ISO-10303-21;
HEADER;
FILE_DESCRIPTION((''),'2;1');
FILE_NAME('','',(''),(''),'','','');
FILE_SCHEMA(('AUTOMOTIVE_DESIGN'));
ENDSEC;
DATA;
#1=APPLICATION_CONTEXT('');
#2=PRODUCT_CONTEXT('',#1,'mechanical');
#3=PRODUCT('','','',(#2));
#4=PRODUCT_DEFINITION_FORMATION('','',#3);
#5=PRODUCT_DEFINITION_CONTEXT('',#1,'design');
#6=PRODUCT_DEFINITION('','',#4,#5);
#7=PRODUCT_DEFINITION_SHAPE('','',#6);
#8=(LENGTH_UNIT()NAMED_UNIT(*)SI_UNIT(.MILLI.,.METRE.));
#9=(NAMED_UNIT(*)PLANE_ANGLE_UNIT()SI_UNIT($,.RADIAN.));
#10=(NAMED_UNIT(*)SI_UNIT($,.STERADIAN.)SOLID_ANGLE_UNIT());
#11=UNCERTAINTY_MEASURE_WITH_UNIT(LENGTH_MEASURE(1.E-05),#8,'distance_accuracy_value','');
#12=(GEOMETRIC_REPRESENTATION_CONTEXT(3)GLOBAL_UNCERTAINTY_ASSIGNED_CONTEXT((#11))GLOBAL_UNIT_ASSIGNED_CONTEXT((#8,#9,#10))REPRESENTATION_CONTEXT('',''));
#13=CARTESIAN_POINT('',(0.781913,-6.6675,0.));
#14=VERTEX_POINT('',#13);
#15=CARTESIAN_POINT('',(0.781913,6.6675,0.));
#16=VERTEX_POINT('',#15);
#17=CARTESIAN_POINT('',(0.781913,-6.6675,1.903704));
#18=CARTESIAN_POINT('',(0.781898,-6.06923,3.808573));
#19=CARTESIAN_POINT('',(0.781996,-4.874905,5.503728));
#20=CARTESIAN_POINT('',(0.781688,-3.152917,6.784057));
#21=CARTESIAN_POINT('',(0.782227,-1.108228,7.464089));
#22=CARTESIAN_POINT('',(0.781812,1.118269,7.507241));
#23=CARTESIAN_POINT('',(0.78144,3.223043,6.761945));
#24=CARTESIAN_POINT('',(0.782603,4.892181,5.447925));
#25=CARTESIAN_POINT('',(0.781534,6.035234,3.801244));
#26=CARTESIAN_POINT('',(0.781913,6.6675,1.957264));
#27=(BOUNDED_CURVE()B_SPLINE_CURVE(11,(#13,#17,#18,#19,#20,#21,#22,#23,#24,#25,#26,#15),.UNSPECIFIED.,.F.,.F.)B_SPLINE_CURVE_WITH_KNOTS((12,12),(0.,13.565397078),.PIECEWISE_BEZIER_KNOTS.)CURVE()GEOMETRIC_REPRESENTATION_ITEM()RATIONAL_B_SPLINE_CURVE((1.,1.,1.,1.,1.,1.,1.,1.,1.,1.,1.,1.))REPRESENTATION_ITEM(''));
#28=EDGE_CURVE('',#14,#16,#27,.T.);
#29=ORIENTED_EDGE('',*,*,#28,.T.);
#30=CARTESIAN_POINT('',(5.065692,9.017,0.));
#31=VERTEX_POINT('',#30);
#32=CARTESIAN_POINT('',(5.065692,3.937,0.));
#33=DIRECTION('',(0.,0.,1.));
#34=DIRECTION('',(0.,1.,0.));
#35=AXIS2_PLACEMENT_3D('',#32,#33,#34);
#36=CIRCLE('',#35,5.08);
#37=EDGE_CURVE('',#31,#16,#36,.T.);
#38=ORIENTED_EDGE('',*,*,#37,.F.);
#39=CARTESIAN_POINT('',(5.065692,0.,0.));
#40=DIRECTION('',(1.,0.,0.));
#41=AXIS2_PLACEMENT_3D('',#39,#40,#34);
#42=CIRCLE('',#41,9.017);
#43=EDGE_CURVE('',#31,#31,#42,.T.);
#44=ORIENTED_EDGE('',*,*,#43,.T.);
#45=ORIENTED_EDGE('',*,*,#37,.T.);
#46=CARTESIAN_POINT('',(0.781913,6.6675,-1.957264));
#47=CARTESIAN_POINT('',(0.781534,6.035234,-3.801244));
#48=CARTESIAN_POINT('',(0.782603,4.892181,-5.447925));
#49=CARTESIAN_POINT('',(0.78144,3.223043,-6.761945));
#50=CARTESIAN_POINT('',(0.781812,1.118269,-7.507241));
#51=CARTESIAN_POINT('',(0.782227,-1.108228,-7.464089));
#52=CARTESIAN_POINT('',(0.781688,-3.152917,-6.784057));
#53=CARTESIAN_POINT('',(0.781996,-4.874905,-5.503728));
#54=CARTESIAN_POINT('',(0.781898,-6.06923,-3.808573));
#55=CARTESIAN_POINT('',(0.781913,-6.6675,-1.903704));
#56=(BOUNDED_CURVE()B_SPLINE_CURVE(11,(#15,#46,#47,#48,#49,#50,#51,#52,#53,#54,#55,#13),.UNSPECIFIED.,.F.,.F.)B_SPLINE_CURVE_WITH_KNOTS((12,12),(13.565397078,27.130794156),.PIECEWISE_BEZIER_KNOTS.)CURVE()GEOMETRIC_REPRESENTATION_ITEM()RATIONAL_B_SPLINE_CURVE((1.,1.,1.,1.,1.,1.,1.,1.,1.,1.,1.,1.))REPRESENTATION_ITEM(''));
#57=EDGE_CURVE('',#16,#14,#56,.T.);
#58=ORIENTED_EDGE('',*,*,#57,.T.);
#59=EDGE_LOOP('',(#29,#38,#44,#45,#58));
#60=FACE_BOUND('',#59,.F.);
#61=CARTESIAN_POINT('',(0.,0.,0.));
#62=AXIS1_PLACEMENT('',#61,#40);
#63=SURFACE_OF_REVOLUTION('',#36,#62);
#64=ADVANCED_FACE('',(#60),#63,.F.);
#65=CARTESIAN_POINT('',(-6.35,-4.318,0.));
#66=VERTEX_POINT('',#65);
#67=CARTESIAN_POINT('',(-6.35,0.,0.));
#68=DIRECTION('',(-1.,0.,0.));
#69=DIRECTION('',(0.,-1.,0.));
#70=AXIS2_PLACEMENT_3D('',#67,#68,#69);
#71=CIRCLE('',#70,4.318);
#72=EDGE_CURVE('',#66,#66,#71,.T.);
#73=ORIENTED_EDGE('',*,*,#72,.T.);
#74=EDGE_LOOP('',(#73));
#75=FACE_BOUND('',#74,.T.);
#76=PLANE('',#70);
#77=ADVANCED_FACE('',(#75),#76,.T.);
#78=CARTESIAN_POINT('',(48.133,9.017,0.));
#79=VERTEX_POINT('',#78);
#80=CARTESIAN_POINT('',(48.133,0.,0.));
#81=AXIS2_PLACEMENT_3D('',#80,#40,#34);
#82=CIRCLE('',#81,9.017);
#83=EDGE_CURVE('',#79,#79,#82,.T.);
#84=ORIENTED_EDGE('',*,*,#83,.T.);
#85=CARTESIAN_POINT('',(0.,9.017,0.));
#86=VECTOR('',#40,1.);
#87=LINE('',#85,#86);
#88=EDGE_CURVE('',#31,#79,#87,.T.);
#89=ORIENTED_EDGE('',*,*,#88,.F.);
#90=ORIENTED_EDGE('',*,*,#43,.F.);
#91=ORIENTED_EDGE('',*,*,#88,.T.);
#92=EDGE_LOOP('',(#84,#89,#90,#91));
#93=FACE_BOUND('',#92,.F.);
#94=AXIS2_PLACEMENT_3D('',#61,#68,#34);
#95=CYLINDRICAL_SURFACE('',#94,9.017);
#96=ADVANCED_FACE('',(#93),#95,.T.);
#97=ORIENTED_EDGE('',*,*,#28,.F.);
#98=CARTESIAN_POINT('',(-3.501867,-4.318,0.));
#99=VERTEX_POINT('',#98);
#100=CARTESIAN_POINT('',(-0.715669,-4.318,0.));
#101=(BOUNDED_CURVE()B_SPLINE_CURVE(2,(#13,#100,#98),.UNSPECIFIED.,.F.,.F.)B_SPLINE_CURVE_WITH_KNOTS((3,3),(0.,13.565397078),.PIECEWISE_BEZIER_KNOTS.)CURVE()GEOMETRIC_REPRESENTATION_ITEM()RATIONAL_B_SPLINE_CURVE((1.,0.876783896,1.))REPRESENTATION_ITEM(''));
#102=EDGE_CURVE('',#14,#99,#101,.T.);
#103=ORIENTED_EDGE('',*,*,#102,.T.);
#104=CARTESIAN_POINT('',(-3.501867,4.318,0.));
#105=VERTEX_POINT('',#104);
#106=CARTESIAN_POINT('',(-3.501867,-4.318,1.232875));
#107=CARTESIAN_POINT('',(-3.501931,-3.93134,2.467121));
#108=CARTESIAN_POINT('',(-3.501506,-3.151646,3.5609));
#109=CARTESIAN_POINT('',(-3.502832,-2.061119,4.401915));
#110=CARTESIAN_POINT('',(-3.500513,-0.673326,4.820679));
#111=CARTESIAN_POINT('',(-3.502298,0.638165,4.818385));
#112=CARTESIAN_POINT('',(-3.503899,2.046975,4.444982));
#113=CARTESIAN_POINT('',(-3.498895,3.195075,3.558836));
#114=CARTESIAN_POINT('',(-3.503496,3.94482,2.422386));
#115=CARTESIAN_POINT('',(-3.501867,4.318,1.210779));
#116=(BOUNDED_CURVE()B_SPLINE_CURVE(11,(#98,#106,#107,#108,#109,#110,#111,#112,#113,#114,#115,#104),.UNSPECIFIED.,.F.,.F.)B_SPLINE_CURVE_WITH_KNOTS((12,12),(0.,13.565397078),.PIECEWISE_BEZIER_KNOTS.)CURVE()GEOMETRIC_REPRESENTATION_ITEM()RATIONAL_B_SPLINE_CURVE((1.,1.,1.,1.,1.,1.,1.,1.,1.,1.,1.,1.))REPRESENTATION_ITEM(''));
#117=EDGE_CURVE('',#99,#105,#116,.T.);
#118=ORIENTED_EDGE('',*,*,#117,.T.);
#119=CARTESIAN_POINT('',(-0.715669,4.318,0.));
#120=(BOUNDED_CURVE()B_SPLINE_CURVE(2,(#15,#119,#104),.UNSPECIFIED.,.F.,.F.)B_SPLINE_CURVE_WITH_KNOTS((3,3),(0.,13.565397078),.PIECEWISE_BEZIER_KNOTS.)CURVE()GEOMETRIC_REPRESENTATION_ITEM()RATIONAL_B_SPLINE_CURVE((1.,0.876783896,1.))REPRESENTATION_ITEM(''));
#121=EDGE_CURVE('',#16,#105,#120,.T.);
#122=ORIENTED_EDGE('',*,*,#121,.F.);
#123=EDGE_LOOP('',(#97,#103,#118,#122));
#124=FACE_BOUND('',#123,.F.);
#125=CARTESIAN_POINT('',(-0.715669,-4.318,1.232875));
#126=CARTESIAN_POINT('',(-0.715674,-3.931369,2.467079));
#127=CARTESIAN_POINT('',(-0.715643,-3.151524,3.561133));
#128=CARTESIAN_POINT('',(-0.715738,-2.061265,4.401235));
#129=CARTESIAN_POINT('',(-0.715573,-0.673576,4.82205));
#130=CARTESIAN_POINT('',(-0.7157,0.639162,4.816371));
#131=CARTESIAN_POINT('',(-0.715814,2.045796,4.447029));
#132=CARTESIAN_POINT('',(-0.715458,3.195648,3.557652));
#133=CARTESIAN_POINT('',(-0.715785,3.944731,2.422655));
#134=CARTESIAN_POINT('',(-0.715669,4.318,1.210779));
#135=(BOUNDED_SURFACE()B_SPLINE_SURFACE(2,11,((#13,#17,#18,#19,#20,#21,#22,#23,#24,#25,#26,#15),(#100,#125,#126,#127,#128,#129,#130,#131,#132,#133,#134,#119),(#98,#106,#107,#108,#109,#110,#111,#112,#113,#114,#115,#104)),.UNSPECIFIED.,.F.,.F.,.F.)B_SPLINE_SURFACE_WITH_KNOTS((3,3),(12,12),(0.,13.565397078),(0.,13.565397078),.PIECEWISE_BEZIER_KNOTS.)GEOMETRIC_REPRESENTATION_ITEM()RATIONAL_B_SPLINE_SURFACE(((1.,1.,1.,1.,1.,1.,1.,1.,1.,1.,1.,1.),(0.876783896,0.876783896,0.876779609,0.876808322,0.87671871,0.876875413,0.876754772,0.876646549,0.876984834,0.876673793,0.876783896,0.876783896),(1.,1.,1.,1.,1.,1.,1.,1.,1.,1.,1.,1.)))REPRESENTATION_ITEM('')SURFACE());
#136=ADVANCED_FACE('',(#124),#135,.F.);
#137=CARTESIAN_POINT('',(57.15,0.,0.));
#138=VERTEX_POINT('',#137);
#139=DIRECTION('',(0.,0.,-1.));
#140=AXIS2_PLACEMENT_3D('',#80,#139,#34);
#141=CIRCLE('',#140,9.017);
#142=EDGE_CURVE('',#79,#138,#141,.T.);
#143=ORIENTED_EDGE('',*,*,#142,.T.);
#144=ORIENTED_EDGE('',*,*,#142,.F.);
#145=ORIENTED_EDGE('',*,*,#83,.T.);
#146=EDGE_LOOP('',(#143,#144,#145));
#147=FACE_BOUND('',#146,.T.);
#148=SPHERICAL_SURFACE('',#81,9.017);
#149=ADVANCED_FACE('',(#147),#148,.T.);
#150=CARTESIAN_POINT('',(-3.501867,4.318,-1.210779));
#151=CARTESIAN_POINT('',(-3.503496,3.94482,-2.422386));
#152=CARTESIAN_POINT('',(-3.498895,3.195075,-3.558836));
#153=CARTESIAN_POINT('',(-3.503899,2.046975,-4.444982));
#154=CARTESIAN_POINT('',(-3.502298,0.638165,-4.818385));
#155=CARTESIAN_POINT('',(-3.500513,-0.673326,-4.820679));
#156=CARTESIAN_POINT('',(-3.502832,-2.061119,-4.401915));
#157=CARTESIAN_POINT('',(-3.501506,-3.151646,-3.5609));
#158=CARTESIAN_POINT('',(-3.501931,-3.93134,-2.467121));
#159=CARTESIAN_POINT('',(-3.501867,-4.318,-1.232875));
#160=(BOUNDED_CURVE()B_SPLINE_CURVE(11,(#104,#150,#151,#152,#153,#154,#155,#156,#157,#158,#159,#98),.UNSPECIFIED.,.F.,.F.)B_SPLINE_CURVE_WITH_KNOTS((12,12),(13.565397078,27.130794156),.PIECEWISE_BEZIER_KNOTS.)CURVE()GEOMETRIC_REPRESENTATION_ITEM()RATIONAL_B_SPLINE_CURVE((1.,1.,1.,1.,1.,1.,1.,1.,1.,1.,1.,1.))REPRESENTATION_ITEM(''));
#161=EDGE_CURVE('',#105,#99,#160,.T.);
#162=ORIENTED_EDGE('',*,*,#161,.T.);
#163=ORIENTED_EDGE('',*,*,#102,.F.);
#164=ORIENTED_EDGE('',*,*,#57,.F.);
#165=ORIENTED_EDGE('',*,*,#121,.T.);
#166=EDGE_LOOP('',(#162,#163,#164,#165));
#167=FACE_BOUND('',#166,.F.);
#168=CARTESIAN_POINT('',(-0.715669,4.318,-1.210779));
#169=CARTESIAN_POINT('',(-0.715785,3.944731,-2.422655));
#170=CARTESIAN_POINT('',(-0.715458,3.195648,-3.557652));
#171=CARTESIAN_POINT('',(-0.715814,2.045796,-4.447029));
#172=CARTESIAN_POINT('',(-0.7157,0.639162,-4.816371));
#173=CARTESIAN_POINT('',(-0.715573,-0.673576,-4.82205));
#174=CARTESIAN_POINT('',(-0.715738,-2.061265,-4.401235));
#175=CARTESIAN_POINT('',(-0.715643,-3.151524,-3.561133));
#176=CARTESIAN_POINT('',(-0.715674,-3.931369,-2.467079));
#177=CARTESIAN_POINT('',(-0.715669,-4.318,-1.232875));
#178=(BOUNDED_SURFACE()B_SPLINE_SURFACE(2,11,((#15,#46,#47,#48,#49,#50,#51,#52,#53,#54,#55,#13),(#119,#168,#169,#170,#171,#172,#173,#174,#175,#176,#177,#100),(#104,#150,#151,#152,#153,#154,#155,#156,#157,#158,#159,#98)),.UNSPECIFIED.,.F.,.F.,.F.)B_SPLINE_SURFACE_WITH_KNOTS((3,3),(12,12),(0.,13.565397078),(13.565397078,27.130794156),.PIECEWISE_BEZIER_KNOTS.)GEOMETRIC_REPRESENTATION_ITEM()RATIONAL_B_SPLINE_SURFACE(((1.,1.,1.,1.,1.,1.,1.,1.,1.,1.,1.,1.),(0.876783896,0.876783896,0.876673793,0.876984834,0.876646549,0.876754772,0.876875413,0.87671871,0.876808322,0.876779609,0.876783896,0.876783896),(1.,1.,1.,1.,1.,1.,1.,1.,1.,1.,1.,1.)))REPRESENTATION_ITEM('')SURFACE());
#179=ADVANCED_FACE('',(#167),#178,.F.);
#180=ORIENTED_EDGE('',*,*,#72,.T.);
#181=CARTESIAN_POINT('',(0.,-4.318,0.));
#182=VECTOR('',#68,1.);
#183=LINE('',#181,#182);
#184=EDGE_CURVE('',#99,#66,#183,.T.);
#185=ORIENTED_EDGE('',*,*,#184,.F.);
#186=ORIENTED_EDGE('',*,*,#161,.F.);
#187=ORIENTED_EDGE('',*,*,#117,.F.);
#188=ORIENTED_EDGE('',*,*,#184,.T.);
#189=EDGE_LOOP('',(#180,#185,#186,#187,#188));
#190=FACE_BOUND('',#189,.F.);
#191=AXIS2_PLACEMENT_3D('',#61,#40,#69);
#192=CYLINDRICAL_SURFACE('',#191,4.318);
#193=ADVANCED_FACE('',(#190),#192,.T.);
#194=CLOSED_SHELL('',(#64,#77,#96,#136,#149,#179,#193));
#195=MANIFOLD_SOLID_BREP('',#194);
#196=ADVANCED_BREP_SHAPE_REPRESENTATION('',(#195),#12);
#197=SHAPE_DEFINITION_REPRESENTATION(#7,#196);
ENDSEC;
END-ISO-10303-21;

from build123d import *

# Parameters (mm, degrees)
F0_R     = 9.017
F1_DEPTH = 57.15
F2_R     = 4.318
F3_DEPTH = 6.35
F5_R     = 9.017
F7_R     = 5.08


# Not quite as in the source:
# - a fillet or chamfer that OpenCascade refuses, or shapes differently, is made with other operations: its cross-section is extruded or revolved along the edge and cut away or added


with BuildPart() as f1:
    # F0 (on Right) → F1 (new body)
    with BuildSketch(Plane.YZ):
        Circle(F0_R)
    extrude(amount=F1_DEPTH)

    # F2 (on face) → F3 (join)
    with BuildSketch(Plane(origin=(0, 0, 0), x_dir=(0, -1, 0), z_dir=(-1, 0, 0))):
        Circle(F2_R)
    extrude(amount=F3_DEPTH)

    # F5
    f5_edges = [f1.edges().sort_by_distance(p)[0] for p in [
        (57.15, -9.017, 0),
    ]]
    fillet(f5_edges, radius=F5_R)

    # F6: fillet of radius 5.08 on 3 edges, made by hand

    # F6_s1 → F6_t2 (revolve, cut)
    with BuildSketch(Plane.XY):
        with BuildLine():
            ThreePointArc((5.0656923515, 9.017), (1.6109188423, 7.6613710878), (0, 4.318))
            Line((0, 4.318), (0, 9.017))
            Line((0, 9.017), (5.0656923515, 9.017))
        make_face()
    revolve(axis=Axis((0, 0, 0), (1, 0, 0)), mode=Mode.SUBTRACT)

    # F7
    f7_edges = [f1.edges().sort_by_distance(p)[0] for p in [
        (0, 0, 4.318),
        (0, 0, -4.318),
    ]]
    fillet(f7_edges, radius=F7_R)


solid = f1.part
